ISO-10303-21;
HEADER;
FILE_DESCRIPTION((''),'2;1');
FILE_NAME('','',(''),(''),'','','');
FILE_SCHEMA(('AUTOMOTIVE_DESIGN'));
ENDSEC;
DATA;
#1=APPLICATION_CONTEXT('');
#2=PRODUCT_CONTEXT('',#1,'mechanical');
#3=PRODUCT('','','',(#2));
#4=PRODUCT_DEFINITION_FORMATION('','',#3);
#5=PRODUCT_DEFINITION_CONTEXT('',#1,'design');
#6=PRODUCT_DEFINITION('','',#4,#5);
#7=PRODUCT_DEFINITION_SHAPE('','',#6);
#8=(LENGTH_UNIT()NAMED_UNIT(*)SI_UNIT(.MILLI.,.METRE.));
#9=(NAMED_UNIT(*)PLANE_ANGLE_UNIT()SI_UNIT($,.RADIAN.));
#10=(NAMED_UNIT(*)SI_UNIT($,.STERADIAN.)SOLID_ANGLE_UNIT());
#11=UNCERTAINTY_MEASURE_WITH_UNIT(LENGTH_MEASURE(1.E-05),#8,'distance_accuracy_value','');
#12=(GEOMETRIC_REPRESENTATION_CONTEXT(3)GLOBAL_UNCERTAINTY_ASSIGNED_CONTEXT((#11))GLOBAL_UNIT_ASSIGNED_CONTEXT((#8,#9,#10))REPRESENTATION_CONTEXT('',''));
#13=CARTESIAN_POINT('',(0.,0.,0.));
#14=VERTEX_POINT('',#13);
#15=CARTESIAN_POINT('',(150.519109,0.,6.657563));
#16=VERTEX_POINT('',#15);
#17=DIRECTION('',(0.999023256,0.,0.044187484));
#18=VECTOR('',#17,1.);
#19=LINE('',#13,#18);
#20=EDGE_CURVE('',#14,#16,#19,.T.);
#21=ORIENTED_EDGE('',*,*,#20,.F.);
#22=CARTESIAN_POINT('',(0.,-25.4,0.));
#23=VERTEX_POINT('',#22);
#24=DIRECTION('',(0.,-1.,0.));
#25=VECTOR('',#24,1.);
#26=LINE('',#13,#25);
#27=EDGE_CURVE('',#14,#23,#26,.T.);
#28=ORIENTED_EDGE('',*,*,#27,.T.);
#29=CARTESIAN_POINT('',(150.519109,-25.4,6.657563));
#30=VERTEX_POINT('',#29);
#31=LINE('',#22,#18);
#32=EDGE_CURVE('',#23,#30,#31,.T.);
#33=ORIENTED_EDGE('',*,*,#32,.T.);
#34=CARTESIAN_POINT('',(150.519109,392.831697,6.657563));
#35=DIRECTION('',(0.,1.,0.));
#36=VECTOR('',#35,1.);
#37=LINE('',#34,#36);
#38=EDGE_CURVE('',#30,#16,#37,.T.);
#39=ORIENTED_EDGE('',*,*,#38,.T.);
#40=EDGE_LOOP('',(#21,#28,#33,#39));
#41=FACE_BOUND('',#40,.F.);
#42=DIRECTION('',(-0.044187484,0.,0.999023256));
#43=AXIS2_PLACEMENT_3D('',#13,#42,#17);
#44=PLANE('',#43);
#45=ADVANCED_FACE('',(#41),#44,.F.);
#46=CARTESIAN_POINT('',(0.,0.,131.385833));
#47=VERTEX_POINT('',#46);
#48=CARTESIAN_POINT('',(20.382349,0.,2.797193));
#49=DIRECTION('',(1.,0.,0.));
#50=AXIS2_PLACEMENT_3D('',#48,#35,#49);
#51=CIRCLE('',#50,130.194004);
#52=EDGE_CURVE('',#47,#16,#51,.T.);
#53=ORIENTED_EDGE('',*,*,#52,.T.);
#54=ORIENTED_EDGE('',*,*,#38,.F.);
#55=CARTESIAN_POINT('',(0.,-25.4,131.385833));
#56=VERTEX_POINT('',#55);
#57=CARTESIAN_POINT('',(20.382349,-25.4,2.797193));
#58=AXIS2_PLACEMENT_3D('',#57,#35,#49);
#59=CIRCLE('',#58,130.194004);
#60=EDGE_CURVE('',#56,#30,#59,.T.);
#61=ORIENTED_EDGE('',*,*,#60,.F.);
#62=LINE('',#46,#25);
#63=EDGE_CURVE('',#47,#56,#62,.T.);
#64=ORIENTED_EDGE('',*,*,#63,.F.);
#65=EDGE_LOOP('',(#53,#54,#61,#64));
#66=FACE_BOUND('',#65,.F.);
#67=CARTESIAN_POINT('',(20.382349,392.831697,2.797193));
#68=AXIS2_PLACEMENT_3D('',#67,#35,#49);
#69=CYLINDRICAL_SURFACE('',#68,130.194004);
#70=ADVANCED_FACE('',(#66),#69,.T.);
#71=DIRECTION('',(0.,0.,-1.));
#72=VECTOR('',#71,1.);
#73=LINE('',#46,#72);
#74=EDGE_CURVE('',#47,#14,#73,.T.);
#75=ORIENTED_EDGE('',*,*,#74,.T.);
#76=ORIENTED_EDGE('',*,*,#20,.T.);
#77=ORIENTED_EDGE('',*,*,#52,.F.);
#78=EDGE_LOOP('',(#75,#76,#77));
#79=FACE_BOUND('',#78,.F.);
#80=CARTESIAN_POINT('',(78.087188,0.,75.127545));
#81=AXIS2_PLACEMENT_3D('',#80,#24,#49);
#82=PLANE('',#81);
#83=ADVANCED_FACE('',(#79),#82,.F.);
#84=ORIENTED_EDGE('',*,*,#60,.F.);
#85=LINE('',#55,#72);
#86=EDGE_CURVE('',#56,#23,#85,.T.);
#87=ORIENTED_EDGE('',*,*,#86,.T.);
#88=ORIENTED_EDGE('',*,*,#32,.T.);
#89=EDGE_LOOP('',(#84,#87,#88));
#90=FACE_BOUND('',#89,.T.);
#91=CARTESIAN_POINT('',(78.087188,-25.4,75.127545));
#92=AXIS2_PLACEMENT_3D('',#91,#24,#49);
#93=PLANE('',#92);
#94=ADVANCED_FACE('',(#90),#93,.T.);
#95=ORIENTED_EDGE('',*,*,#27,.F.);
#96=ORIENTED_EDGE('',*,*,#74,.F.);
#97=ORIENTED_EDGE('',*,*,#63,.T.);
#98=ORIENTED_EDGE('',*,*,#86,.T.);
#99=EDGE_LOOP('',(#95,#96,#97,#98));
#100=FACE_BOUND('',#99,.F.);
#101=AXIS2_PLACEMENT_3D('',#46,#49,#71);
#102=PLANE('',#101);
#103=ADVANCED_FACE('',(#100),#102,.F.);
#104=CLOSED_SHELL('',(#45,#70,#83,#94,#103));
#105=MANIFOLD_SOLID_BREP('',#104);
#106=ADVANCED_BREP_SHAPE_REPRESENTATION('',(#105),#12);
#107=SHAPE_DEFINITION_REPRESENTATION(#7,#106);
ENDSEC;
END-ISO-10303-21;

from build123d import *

# Parameters (mm, degrees)
F1_DEPTH    = 25.4
F2_T1_DEPTH = 811.0633942267


# Not quite as in the source:
# - a fillet or chamfer that OpenCascade refuses, or shapes differently, is made with other operations: its cross-section is extruded or revolved along the edge and cut away or added


with BuildPart() as f1:
    # F0 (on Front) → F1 (new body)
    with BuildSketch(Plane.XZ):
        Polygon((0, 131.385833025), (0, 0), (150.5763530731, 6.660095416), (150.5763530731, 159.9298715591), align=None)
    extrude(amount=F1_DEPTH)

    # F2: fillet of radius 130.1940036456 on 1 edges, made by hand

    # F2_s2 → F2_t1 (cut)
    with BuildSketch(Plane.XZ.offset(-392.8316971133)):
        with BuildLine():
            ThreePointArc((150.5763530731, 2.7971927138), (104.9306164399, 101.8025922154), (0, 131.385833025))
            Line((0, 131.385833025), (-0.4076469886, 133.9576058312))
            ThreePointArc((-0.4076469886, 133.9576058312), (74.8032082099, 148.2161714974), (150.0913847465, 162.4881907645))
            Line((150.0913847465, 162.4881907645), (153.180233146, 159.9298715591))
            Line((153.180233146, 159.9298715591), (153.180233146, 2.7971927138))
            Line((153.180233146, 2.7971927138), (150.5763530731, 2.7971927138))
        make_face()
    extrude(amount=F2_T1_DEPTH, mode=Mode.SUBTRACT)


solid = f1.part
